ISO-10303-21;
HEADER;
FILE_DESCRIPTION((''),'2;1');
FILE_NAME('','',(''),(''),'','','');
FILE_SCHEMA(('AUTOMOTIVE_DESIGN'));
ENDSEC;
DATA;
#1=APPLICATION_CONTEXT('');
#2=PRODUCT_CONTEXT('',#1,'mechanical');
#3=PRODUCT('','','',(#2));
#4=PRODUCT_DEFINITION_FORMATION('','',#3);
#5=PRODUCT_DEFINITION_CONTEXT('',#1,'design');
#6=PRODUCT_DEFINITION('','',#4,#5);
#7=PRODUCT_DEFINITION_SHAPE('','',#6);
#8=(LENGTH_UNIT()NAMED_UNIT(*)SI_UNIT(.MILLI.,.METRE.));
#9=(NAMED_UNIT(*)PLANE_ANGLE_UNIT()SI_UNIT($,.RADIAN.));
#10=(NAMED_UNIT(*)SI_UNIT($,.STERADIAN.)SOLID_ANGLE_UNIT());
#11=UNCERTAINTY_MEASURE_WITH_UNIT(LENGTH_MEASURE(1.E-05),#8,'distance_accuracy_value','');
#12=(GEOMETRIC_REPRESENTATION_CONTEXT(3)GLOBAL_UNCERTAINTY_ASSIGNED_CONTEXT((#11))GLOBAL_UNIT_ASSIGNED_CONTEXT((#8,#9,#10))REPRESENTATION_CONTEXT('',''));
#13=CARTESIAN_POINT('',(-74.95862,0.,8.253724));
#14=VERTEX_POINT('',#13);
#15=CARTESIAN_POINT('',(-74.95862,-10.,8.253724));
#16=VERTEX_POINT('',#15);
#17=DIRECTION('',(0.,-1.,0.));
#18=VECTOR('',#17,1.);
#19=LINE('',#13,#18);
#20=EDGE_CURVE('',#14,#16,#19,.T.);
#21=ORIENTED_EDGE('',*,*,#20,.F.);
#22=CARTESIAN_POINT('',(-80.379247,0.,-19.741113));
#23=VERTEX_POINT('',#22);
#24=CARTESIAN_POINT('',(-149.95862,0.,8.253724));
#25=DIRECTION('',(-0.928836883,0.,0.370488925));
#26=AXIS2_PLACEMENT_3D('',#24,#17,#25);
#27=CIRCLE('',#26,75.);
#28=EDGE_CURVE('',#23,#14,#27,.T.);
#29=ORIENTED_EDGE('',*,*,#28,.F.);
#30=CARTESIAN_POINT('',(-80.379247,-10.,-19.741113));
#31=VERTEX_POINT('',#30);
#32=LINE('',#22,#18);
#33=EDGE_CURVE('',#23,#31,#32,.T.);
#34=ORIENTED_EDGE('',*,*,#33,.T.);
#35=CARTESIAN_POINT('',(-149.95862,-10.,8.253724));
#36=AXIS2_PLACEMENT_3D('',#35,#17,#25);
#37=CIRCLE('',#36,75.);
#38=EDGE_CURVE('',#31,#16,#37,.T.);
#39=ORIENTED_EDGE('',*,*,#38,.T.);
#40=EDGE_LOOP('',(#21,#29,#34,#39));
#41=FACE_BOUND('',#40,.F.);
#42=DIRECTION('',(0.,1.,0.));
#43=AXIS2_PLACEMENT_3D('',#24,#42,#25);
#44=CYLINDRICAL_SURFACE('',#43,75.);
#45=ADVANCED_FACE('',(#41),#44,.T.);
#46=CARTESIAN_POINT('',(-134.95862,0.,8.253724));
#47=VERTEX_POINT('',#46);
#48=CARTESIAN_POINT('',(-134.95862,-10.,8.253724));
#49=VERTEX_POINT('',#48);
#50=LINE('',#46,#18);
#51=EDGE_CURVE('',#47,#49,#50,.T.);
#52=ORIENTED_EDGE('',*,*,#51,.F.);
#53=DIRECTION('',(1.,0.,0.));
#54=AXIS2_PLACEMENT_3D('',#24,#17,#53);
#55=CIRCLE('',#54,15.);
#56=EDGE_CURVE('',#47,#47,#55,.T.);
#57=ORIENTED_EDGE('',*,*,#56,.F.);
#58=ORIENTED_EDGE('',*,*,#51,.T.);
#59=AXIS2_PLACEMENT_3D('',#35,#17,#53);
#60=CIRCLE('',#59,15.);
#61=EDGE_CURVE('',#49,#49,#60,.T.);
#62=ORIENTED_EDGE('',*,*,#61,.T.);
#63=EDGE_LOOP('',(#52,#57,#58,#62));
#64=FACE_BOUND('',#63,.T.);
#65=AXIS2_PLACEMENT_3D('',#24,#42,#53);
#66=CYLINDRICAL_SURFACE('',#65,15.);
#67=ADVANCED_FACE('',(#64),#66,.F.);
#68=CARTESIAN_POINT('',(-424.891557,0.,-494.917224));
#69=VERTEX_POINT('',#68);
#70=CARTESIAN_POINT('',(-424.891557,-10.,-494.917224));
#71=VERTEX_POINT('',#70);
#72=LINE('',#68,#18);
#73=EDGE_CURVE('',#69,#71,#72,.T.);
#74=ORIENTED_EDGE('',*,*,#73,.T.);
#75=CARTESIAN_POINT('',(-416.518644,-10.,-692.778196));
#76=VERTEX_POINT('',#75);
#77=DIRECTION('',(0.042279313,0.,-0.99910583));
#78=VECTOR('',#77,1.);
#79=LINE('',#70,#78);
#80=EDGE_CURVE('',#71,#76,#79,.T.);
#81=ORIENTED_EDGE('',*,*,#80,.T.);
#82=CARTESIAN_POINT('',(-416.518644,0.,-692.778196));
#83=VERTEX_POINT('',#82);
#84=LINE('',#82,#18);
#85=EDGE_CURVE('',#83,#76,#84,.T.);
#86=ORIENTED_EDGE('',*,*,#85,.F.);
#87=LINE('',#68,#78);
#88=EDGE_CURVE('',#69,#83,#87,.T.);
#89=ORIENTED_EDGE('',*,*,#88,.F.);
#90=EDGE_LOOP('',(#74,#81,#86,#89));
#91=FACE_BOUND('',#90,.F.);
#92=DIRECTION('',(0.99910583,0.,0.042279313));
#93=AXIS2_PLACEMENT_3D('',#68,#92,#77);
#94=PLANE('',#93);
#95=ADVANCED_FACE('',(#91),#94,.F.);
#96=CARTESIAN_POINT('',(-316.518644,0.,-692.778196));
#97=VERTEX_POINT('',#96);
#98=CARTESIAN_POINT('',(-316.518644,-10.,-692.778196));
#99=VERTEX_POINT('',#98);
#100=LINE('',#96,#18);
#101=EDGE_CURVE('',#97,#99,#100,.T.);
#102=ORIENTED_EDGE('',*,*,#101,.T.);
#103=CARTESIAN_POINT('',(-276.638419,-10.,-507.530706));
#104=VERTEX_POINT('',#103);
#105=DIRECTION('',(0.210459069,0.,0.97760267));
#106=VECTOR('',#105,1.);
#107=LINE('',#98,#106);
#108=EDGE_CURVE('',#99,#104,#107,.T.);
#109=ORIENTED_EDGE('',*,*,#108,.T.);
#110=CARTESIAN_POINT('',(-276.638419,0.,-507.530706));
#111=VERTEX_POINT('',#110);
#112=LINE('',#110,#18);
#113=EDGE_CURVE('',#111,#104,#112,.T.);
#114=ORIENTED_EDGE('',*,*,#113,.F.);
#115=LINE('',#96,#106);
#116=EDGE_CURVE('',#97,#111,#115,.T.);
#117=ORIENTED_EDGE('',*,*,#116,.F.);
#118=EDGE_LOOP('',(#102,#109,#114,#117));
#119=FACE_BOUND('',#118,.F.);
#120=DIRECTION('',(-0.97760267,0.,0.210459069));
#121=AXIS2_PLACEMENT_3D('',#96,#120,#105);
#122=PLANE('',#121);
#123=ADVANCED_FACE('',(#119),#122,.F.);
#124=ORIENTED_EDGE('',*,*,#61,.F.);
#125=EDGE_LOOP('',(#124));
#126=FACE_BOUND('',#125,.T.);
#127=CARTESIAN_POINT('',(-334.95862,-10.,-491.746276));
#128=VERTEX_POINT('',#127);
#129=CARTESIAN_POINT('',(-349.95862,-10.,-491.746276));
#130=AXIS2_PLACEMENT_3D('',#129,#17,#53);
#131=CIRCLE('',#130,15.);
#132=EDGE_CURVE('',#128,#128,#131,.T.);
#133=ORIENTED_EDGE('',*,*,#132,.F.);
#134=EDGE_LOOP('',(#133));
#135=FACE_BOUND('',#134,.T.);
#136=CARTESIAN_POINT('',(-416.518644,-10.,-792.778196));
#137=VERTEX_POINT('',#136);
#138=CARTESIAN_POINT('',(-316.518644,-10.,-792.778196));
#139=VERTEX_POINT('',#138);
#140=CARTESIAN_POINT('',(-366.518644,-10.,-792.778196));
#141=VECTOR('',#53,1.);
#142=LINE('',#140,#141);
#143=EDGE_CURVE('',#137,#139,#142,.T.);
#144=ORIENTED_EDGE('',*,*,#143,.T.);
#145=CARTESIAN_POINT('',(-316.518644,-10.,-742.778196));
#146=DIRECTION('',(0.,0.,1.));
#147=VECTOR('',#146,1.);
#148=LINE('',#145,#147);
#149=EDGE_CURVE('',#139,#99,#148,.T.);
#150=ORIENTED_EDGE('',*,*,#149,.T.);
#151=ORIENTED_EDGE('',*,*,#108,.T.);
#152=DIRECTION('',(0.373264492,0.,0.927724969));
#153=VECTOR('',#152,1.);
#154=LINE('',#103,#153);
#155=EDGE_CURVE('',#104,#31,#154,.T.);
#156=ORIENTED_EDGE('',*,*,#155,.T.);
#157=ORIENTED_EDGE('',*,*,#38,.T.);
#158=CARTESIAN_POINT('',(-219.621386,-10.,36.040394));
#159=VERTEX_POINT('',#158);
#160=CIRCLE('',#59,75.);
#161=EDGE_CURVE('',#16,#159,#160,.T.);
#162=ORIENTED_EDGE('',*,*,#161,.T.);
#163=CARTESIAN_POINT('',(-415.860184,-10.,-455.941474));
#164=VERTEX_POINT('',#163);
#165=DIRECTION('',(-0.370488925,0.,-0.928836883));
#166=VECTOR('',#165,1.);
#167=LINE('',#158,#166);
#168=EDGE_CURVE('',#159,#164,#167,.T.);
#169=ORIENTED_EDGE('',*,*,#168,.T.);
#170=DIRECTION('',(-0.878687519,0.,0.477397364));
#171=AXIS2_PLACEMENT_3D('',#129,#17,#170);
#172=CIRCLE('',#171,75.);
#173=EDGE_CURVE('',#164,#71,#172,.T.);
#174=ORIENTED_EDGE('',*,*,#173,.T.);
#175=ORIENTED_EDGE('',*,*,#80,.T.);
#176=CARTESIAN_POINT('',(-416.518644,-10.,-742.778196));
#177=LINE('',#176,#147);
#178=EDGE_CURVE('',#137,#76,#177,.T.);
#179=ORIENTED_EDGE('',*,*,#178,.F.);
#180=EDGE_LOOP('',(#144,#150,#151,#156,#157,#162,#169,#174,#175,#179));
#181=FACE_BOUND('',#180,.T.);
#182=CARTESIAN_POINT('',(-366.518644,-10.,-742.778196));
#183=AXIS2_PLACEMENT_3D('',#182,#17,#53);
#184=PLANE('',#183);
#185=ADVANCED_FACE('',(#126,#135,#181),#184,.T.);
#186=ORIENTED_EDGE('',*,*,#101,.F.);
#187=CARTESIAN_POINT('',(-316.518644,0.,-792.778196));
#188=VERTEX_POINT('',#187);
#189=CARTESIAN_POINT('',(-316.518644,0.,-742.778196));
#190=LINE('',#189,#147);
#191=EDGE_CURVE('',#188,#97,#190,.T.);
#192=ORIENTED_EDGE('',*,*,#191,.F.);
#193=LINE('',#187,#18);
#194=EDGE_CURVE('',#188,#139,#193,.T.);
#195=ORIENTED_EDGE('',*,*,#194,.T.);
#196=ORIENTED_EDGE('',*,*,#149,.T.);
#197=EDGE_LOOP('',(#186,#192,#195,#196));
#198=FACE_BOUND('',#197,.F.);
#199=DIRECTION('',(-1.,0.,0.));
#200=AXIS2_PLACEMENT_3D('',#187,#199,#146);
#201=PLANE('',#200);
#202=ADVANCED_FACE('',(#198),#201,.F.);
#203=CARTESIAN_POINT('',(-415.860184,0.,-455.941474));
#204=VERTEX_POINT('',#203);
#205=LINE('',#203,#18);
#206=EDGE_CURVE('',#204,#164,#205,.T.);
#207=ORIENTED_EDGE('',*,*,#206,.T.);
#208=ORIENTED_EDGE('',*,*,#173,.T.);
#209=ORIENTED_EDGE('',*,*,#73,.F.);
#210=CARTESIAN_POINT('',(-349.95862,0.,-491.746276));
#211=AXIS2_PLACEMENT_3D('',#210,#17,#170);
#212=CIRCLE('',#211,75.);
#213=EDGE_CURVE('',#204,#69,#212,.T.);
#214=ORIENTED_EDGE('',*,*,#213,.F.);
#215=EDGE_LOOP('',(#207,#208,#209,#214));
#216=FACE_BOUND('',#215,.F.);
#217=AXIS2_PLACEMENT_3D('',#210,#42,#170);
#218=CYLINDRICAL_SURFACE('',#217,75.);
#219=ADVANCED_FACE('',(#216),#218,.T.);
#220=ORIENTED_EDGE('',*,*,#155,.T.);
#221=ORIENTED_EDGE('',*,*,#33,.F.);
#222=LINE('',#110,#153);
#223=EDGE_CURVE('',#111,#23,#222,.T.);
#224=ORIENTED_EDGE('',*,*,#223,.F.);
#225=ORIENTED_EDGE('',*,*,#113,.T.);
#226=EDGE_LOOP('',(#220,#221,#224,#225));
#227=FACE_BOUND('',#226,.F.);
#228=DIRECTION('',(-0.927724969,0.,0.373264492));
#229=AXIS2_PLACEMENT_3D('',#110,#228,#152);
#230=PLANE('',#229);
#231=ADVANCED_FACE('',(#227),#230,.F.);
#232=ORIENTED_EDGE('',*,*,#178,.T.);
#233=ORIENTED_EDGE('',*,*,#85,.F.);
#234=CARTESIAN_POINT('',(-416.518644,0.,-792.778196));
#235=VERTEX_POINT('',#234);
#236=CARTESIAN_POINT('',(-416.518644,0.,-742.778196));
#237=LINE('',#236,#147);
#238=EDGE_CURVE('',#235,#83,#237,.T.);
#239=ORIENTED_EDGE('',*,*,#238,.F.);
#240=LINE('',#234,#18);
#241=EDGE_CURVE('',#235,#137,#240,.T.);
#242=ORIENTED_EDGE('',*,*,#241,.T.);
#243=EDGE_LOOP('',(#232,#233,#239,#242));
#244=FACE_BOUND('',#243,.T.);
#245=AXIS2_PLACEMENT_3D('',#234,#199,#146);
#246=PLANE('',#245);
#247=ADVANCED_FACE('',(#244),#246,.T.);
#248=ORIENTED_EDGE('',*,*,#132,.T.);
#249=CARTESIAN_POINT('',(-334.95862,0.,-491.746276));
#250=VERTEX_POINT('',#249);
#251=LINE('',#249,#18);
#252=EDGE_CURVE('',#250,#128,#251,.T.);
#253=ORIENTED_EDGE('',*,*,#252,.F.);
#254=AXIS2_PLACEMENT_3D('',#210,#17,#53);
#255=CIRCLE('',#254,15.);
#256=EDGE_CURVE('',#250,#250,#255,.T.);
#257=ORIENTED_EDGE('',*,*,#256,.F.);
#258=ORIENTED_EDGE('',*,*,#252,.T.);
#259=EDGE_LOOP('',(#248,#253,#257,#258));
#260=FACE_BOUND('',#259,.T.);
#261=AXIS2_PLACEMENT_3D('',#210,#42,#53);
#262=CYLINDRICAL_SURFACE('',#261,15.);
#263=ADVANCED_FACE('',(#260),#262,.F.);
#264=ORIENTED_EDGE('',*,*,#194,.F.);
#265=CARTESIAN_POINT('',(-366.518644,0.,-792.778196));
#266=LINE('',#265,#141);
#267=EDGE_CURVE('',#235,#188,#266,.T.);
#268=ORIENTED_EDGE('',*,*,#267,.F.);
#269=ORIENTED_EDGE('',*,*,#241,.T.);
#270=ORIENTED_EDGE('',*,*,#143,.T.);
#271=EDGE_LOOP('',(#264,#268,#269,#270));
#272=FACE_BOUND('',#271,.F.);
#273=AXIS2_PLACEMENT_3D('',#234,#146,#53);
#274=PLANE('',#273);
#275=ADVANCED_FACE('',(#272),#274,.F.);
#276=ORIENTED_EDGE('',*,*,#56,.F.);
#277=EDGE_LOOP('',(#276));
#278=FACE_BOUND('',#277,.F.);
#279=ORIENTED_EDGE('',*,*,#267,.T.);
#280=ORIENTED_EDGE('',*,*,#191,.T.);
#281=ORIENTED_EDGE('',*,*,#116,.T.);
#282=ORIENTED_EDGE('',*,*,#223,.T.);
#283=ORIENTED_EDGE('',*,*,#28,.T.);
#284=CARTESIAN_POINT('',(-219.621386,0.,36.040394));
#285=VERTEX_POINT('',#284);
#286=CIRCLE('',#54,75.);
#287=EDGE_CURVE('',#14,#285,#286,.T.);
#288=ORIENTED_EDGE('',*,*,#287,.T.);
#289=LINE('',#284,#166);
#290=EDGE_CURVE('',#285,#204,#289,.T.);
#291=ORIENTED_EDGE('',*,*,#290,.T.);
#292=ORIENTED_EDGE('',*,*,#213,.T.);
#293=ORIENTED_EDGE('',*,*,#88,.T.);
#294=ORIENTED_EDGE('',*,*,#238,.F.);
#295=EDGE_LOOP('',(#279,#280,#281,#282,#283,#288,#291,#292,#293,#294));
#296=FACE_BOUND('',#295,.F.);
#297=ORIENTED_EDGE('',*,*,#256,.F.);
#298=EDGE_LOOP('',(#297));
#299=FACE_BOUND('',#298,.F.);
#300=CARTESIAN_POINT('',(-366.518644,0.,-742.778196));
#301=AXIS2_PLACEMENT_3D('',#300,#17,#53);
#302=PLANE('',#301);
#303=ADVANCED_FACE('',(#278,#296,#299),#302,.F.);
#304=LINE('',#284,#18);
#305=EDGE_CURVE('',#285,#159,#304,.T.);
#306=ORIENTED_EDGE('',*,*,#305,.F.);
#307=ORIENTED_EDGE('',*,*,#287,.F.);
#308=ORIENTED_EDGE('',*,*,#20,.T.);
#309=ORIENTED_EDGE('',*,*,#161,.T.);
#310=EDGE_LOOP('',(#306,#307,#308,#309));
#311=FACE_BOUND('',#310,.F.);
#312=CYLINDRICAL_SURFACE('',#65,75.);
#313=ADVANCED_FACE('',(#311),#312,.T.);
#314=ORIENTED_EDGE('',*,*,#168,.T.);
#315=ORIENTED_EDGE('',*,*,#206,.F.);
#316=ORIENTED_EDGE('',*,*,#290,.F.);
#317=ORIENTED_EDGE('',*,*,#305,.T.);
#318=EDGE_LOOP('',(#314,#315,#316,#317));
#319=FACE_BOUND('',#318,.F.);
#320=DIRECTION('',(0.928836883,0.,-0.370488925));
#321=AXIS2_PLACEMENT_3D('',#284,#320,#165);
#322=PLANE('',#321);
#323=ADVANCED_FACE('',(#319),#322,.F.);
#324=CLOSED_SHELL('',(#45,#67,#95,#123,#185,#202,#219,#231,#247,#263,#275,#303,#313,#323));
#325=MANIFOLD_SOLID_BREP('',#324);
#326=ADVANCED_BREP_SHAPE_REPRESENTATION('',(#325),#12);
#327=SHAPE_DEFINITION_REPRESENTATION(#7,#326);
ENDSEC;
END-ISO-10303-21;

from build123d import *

# Parameters (mm, degrees)
F0_W     = 100
F0_H     = 100
F0_R     = 15
F1_DEPTH = 10


# Not quite as in the source:
# - a feature names something its author has since deleted; it is built from what else it names


with BuildPart() as f1:
    # F0 (on Front) → F1 (new body)
    with BuildSketch(Plane.XZ):
        with Locations((-366.5186442992, -742.7781961888)):
            Rectangle(F0_W, F0_H)
        with BuildLine():
            Line((-424.891556994, -494.917224318), (-416.5186442992, -692.7781961888))
            Line((-416.5186442992, -692.7781961888), (-316.5186442992, -692.7781961888))
            Line((-316.5186442992, -692.7781961888), (-276.6384194866, -507.5307060219))
            ThreePointArc((-276.6384194866, -507.5307060219), (-356.3167020216, -566.4762885136), (-424.891556994, -494.917224318))
        make_face()
        with BuildLine():
            ThreePointArc((-415.8601836979, -455.9414735734), (-423.022745475, -474.8160209943), (-424.891556994, -494.917224318))
            ThreePointArc((-424.891556994, -494.917224318), (-356.3167020216, -566.4762885136), (-276.6384194866, -507.5307060219))
            ThreePointArc((-276.6384194866, -507.5307060219), (-275.3797520239, -499.6830567418), (-274.9586197372, -491.7462758703))
            ThreePointArc((-274.9586197372, -491.7462758703), (-331.4872540196, -419.0564646962), (-415.8601836979, -455.9414735734))
        make_face()
        with Locations((-349.9586197372, -491.7462758703)):
            Circle(F0_R, mode=Mode.SUBTRACT)
        with BuildLine():
            ThreePointArc((-274.9586197372, -491.7462758703), (-275.3797520239, -499.6830567418), (-276.6384194866, -507.5307060219))
            Line((-276.6384194866, -507.5307060219), (-80.3792470285, -19.7411127776))
            ThreePointArc((-80.3792470285, -19.7411127776), (-177.8494040627, -61.3674231584), (-219.6213859991, 36.0403935367))
            Line((-219.6213859991, 36.0403935367), (-415.8601836979, -455.9414735734))
            ThreePointArc((-415.8601836979, -455.9414735734), (-331.4872540196, -419.0564646962), (-274.9586197372, -491.7462758703))
        make_face()
        with BuildLine():
            ThreePointArc((-219.6213859991, 36.0403935367), (-177.8494040627, -61.3674231584), (-80.3792470285, -19.7411127776))
            ThreePointArc((-80.3792470285, -19.7411127776), (-76.3262459022, -6.0036782783), (-74.9586197372, 8.2537241297))
            ThreePointArc((-74.9586197372, 8.2537241297), (-135.8113138036, 81.9073305236), (-219.6213859991, 36.0403935367))
        make_face()
        with Locations((-149.9586197372, 8.2537241297)):
            Circle(F0_R, mode=Mode.SUBTRACT)
    extrude(amount=F1_DEPTH)


solid = f1.part
